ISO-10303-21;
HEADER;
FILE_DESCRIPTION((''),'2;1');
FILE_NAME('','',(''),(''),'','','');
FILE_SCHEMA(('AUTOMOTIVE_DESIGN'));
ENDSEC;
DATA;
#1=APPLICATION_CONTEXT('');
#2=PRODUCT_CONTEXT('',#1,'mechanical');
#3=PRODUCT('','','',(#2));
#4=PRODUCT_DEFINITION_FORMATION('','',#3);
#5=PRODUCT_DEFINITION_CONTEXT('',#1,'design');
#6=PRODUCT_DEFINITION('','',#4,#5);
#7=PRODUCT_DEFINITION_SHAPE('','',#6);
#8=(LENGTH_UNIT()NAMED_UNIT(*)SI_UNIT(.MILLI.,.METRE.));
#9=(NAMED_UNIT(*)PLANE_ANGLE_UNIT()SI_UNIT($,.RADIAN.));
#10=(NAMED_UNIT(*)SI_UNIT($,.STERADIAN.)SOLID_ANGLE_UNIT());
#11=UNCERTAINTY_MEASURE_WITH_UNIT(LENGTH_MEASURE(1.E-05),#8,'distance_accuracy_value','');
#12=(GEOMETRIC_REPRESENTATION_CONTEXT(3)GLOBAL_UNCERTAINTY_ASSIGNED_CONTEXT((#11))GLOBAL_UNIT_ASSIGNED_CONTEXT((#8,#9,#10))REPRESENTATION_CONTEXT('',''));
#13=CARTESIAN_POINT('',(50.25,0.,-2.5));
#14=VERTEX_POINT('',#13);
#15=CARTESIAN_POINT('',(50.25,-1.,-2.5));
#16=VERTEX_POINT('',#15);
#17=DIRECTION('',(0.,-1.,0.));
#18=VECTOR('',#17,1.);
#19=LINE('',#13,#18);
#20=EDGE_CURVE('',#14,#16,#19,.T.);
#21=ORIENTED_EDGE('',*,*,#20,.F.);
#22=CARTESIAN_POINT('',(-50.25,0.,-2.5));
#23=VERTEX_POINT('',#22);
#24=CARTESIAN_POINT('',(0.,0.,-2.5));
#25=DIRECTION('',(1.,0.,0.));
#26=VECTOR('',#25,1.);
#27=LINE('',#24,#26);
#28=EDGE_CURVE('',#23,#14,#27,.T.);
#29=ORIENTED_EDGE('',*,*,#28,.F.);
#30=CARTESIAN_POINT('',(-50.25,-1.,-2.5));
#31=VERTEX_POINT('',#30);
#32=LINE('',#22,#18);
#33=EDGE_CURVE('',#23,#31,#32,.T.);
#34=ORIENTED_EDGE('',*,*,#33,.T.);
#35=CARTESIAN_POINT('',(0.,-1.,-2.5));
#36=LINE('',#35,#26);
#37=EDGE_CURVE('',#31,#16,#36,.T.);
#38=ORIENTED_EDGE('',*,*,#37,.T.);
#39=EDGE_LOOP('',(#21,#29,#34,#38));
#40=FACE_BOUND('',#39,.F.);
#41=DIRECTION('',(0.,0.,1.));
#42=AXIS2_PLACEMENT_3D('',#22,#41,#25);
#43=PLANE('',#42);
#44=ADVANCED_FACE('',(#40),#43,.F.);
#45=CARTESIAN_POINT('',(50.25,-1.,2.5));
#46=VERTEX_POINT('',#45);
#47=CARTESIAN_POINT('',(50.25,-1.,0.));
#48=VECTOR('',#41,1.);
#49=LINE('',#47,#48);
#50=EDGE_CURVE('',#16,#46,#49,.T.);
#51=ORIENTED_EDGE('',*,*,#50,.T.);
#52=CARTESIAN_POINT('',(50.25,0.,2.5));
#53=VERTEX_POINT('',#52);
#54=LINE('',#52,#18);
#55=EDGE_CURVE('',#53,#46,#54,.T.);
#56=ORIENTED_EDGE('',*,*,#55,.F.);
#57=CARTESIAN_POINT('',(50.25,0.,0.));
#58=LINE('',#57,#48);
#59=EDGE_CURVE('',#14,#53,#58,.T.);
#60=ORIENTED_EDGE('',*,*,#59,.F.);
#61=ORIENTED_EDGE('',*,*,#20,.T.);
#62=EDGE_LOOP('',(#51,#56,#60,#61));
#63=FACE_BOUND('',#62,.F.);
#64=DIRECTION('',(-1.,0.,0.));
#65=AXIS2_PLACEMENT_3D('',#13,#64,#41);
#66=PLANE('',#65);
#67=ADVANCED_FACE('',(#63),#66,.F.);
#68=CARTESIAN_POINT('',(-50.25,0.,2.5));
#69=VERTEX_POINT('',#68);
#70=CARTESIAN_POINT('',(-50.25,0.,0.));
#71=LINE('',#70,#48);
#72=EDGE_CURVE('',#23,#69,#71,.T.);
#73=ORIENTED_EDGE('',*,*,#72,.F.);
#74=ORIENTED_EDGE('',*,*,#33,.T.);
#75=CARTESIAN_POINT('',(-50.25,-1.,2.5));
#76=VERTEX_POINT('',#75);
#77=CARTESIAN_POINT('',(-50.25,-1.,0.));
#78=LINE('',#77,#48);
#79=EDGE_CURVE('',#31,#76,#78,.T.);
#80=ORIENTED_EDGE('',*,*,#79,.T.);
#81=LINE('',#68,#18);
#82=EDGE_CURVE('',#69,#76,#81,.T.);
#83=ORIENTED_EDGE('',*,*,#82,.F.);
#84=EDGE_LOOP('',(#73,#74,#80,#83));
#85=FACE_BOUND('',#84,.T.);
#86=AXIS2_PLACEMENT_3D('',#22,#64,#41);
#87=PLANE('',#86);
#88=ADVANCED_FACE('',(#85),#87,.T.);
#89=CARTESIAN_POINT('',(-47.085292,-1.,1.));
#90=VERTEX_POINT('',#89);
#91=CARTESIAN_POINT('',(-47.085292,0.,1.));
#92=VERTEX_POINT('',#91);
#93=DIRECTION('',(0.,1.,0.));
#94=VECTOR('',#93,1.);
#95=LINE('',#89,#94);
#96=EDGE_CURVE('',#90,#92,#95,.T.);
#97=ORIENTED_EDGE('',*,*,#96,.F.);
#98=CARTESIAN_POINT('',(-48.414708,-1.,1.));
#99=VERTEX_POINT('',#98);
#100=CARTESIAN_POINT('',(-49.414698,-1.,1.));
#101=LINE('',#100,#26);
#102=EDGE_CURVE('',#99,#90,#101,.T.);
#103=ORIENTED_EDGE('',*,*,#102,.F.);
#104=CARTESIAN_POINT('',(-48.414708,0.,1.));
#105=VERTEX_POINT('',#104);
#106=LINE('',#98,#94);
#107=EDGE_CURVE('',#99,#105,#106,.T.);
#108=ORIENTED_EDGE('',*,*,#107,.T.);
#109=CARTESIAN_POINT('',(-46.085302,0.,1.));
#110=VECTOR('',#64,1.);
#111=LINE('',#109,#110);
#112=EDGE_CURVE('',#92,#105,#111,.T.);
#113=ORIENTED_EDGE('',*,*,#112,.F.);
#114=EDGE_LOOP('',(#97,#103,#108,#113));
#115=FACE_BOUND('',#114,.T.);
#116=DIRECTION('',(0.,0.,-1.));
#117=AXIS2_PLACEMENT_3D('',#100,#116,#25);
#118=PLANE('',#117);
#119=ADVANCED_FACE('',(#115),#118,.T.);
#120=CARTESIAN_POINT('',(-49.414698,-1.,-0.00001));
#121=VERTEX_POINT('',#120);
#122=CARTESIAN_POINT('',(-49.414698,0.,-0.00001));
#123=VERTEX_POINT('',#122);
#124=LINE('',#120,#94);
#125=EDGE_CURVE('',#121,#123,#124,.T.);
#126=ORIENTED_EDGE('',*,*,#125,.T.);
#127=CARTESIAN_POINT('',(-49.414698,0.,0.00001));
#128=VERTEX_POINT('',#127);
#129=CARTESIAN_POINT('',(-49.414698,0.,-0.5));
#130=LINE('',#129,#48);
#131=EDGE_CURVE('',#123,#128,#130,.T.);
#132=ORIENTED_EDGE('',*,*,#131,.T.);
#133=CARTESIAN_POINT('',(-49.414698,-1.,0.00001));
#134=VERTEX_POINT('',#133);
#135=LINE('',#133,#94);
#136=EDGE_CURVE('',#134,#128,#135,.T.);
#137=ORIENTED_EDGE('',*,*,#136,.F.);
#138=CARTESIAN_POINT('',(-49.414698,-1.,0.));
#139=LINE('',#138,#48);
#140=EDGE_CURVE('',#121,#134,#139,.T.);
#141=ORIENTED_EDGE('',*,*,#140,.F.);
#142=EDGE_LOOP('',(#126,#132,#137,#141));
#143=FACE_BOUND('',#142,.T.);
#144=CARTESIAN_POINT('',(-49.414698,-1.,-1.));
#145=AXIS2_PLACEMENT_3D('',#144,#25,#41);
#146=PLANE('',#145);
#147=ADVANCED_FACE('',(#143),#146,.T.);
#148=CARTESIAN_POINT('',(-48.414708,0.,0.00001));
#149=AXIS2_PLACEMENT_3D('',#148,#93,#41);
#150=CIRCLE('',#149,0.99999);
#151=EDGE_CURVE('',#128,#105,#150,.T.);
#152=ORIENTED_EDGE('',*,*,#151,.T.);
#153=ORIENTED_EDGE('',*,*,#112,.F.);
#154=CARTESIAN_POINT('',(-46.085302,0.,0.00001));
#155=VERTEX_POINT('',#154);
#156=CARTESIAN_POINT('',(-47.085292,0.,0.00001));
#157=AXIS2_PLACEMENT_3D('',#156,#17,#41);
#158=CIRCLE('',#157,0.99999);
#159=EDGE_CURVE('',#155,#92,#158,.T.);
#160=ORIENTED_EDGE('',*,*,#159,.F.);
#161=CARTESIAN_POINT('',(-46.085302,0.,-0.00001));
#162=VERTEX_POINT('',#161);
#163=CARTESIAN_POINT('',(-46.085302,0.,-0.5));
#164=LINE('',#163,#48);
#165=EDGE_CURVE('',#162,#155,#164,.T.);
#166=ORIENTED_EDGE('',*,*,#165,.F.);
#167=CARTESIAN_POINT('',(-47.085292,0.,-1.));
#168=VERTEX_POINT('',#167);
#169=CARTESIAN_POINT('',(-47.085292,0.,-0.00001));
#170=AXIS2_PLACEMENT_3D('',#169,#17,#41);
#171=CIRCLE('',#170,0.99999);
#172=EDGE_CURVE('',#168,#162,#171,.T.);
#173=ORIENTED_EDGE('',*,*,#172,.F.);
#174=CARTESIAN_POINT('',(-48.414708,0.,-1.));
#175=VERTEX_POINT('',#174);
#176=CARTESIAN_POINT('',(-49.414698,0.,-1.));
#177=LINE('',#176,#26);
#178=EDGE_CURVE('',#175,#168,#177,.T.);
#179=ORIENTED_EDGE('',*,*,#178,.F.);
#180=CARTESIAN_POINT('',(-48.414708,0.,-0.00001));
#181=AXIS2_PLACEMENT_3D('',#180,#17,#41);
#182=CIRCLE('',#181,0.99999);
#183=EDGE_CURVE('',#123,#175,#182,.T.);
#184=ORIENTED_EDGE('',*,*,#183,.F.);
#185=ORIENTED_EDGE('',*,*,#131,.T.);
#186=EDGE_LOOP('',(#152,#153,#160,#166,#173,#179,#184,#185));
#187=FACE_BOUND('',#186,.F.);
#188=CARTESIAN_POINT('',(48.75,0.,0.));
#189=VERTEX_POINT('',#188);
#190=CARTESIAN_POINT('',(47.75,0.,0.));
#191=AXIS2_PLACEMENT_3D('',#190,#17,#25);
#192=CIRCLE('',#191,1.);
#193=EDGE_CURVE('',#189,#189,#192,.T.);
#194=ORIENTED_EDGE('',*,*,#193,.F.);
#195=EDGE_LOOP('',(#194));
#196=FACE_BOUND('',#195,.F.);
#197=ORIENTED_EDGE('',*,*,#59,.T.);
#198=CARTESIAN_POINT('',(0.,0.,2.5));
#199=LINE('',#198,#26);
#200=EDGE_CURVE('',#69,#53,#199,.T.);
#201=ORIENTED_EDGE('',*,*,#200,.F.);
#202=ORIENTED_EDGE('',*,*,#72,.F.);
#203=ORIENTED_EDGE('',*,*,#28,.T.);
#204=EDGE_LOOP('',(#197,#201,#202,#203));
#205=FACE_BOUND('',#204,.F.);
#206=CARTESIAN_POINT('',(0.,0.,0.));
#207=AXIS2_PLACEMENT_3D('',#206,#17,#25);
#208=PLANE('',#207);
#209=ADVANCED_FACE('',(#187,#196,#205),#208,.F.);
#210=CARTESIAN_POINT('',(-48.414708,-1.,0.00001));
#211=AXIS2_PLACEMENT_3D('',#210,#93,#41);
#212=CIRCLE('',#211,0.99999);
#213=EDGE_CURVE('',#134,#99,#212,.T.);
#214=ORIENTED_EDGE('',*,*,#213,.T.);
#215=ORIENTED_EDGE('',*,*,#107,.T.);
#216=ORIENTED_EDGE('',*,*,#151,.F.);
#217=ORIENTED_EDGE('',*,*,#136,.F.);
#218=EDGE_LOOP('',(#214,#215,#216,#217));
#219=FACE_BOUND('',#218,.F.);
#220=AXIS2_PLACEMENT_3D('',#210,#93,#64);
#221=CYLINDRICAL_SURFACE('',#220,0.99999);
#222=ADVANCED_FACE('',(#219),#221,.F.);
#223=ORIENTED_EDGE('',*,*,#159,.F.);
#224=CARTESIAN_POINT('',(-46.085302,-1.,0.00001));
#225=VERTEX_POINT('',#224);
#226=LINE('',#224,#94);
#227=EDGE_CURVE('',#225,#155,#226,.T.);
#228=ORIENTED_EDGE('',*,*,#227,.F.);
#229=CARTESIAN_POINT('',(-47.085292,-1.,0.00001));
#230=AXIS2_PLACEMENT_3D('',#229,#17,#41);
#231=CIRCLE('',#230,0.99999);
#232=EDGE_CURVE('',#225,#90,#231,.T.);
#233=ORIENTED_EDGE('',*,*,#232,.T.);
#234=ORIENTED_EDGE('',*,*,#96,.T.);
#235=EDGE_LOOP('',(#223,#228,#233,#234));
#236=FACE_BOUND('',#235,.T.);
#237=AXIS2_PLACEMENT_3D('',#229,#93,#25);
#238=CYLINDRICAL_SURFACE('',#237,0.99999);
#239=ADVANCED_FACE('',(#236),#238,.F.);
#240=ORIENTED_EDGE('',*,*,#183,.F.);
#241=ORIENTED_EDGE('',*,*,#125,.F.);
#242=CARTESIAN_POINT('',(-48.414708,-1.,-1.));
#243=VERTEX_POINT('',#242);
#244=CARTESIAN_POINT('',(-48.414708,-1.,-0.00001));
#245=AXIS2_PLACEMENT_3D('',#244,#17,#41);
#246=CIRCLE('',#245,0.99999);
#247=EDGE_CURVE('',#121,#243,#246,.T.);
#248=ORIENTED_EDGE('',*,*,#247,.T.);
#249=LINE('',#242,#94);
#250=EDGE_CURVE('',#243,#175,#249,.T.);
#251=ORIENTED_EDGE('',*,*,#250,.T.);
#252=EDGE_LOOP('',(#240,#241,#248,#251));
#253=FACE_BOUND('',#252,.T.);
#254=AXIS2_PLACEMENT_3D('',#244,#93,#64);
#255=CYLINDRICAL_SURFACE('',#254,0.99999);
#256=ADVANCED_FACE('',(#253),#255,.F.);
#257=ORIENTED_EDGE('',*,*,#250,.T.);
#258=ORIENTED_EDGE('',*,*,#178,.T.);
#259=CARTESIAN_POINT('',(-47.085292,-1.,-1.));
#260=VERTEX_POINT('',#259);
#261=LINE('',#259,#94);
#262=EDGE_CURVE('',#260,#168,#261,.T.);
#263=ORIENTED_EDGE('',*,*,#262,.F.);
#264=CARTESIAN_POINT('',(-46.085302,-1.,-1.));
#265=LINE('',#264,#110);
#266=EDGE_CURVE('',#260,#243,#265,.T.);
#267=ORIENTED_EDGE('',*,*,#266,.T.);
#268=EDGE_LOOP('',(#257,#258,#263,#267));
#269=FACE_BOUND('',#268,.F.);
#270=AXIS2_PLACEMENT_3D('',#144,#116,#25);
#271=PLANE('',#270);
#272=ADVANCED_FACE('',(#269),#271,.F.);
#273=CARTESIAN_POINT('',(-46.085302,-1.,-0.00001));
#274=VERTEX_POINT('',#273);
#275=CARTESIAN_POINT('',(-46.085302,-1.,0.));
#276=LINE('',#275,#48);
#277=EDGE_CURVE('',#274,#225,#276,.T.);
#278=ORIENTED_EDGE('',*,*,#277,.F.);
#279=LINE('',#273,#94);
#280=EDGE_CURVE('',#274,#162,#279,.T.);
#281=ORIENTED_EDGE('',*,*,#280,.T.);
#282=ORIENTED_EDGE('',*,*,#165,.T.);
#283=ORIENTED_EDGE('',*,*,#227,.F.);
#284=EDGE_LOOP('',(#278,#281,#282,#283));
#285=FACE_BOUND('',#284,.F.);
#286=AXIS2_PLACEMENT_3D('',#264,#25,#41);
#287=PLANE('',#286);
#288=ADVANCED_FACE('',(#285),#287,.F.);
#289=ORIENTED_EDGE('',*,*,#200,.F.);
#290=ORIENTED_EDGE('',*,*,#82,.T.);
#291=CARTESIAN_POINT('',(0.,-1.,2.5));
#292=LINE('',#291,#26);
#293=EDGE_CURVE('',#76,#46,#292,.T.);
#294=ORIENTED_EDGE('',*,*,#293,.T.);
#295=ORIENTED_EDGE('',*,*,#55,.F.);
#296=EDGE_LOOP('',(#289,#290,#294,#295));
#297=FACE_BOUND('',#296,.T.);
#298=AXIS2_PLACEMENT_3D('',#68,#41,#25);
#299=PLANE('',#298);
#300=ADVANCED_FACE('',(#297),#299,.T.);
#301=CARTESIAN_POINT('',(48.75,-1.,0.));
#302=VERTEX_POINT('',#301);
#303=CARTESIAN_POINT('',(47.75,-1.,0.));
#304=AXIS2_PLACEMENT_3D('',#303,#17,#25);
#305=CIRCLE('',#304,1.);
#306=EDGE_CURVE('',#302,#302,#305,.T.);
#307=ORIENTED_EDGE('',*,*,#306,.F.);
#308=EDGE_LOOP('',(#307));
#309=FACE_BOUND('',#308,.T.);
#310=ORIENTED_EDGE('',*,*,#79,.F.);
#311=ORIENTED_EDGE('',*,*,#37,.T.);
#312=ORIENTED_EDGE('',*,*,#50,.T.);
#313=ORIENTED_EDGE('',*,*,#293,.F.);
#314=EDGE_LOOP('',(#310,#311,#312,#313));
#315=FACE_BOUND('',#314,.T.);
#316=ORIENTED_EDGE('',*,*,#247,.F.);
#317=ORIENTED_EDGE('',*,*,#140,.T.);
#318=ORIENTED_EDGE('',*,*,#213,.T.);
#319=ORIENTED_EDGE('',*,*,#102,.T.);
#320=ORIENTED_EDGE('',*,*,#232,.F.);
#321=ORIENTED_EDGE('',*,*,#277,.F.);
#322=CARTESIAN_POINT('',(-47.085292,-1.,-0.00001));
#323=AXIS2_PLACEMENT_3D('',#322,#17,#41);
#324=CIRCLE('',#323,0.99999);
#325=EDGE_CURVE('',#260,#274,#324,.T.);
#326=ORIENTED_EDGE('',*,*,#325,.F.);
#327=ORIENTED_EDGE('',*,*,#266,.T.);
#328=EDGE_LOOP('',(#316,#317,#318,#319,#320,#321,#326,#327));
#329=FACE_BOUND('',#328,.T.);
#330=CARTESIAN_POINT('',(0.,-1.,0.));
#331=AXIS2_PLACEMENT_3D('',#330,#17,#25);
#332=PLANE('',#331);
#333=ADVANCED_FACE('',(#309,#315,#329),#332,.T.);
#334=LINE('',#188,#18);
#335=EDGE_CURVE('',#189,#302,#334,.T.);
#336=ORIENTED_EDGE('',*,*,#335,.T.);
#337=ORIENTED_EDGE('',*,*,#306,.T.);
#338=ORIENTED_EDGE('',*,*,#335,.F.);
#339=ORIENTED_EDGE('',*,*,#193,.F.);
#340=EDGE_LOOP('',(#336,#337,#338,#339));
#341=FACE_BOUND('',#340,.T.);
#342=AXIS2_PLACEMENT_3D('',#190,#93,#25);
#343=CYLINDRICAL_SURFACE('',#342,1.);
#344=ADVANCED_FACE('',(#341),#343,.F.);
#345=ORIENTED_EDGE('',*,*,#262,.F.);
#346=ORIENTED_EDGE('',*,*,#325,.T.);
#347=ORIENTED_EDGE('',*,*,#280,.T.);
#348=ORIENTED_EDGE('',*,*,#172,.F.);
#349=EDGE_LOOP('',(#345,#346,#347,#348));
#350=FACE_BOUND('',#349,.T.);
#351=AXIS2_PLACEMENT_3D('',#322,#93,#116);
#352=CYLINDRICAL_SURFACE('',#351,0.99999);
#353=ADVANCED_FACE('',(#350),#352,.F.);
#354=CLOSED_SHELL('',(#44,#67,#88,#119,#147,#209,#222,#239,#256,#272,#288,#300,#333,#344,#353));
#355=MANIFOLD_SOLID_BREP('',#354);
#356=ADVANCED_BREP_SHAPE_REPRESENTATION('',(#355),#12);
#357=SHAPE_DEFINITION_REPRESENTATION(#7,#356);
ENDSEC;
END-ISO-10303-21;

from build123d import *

# Parameters (mm, degrees)
F0_W     = 100.5
F0_H     = 5
F0_R     = 1
F1_DEPTH = 1
F2_W     = 3.3293967307
F2_H     = 2
F3_DEPTH = 25
F4_R     = 0.99999


# Not quite as in the source:
# - a fillet or chamfer is up to 0.001 mm smaller than in the source, because OpenCascade refuses the exact size


with BuildPart() as f1:
    # F0 (on Front) → F1 (new body)
    with BuildSketch(Plane.XZ):
        Rectangle(F0_W, F0_H)
        with Locations((-47.75, 0)):
            Circle(F0_R, mode=Mode.SUBTRACT)
        with Locations((47.75, 0)):
            Circle(F0_R, mode=Mode.SUBTRACT)
    extrude(amount=F1_DEPTH)

    # F2 (on face) → F3 (cut)
    with BuildSketch(Plane.XZ.offset(1)):
        with Locations((-47.75, 0)):
            Rectangle(F2_W, F2_H)
    extrude(amount=-F3_DEPTH, mode=Mode.SUBTRACT)

    # F4 (radius 1 in the source; OpenCascade refuses exactly that, so slightly less here)
    f4_edges = [f1.edges().sort_by_distance(p)[0] for p in [
        (-46.085302, -0.5, 1),
        (-46.085302, -0.5, -1),
        (-49.414698, -0.5, 1),
        (-49.414698, -0.5, -1),
    ]]
    fillet(f4_edges, radius=F4_R)


solid = f1.part
